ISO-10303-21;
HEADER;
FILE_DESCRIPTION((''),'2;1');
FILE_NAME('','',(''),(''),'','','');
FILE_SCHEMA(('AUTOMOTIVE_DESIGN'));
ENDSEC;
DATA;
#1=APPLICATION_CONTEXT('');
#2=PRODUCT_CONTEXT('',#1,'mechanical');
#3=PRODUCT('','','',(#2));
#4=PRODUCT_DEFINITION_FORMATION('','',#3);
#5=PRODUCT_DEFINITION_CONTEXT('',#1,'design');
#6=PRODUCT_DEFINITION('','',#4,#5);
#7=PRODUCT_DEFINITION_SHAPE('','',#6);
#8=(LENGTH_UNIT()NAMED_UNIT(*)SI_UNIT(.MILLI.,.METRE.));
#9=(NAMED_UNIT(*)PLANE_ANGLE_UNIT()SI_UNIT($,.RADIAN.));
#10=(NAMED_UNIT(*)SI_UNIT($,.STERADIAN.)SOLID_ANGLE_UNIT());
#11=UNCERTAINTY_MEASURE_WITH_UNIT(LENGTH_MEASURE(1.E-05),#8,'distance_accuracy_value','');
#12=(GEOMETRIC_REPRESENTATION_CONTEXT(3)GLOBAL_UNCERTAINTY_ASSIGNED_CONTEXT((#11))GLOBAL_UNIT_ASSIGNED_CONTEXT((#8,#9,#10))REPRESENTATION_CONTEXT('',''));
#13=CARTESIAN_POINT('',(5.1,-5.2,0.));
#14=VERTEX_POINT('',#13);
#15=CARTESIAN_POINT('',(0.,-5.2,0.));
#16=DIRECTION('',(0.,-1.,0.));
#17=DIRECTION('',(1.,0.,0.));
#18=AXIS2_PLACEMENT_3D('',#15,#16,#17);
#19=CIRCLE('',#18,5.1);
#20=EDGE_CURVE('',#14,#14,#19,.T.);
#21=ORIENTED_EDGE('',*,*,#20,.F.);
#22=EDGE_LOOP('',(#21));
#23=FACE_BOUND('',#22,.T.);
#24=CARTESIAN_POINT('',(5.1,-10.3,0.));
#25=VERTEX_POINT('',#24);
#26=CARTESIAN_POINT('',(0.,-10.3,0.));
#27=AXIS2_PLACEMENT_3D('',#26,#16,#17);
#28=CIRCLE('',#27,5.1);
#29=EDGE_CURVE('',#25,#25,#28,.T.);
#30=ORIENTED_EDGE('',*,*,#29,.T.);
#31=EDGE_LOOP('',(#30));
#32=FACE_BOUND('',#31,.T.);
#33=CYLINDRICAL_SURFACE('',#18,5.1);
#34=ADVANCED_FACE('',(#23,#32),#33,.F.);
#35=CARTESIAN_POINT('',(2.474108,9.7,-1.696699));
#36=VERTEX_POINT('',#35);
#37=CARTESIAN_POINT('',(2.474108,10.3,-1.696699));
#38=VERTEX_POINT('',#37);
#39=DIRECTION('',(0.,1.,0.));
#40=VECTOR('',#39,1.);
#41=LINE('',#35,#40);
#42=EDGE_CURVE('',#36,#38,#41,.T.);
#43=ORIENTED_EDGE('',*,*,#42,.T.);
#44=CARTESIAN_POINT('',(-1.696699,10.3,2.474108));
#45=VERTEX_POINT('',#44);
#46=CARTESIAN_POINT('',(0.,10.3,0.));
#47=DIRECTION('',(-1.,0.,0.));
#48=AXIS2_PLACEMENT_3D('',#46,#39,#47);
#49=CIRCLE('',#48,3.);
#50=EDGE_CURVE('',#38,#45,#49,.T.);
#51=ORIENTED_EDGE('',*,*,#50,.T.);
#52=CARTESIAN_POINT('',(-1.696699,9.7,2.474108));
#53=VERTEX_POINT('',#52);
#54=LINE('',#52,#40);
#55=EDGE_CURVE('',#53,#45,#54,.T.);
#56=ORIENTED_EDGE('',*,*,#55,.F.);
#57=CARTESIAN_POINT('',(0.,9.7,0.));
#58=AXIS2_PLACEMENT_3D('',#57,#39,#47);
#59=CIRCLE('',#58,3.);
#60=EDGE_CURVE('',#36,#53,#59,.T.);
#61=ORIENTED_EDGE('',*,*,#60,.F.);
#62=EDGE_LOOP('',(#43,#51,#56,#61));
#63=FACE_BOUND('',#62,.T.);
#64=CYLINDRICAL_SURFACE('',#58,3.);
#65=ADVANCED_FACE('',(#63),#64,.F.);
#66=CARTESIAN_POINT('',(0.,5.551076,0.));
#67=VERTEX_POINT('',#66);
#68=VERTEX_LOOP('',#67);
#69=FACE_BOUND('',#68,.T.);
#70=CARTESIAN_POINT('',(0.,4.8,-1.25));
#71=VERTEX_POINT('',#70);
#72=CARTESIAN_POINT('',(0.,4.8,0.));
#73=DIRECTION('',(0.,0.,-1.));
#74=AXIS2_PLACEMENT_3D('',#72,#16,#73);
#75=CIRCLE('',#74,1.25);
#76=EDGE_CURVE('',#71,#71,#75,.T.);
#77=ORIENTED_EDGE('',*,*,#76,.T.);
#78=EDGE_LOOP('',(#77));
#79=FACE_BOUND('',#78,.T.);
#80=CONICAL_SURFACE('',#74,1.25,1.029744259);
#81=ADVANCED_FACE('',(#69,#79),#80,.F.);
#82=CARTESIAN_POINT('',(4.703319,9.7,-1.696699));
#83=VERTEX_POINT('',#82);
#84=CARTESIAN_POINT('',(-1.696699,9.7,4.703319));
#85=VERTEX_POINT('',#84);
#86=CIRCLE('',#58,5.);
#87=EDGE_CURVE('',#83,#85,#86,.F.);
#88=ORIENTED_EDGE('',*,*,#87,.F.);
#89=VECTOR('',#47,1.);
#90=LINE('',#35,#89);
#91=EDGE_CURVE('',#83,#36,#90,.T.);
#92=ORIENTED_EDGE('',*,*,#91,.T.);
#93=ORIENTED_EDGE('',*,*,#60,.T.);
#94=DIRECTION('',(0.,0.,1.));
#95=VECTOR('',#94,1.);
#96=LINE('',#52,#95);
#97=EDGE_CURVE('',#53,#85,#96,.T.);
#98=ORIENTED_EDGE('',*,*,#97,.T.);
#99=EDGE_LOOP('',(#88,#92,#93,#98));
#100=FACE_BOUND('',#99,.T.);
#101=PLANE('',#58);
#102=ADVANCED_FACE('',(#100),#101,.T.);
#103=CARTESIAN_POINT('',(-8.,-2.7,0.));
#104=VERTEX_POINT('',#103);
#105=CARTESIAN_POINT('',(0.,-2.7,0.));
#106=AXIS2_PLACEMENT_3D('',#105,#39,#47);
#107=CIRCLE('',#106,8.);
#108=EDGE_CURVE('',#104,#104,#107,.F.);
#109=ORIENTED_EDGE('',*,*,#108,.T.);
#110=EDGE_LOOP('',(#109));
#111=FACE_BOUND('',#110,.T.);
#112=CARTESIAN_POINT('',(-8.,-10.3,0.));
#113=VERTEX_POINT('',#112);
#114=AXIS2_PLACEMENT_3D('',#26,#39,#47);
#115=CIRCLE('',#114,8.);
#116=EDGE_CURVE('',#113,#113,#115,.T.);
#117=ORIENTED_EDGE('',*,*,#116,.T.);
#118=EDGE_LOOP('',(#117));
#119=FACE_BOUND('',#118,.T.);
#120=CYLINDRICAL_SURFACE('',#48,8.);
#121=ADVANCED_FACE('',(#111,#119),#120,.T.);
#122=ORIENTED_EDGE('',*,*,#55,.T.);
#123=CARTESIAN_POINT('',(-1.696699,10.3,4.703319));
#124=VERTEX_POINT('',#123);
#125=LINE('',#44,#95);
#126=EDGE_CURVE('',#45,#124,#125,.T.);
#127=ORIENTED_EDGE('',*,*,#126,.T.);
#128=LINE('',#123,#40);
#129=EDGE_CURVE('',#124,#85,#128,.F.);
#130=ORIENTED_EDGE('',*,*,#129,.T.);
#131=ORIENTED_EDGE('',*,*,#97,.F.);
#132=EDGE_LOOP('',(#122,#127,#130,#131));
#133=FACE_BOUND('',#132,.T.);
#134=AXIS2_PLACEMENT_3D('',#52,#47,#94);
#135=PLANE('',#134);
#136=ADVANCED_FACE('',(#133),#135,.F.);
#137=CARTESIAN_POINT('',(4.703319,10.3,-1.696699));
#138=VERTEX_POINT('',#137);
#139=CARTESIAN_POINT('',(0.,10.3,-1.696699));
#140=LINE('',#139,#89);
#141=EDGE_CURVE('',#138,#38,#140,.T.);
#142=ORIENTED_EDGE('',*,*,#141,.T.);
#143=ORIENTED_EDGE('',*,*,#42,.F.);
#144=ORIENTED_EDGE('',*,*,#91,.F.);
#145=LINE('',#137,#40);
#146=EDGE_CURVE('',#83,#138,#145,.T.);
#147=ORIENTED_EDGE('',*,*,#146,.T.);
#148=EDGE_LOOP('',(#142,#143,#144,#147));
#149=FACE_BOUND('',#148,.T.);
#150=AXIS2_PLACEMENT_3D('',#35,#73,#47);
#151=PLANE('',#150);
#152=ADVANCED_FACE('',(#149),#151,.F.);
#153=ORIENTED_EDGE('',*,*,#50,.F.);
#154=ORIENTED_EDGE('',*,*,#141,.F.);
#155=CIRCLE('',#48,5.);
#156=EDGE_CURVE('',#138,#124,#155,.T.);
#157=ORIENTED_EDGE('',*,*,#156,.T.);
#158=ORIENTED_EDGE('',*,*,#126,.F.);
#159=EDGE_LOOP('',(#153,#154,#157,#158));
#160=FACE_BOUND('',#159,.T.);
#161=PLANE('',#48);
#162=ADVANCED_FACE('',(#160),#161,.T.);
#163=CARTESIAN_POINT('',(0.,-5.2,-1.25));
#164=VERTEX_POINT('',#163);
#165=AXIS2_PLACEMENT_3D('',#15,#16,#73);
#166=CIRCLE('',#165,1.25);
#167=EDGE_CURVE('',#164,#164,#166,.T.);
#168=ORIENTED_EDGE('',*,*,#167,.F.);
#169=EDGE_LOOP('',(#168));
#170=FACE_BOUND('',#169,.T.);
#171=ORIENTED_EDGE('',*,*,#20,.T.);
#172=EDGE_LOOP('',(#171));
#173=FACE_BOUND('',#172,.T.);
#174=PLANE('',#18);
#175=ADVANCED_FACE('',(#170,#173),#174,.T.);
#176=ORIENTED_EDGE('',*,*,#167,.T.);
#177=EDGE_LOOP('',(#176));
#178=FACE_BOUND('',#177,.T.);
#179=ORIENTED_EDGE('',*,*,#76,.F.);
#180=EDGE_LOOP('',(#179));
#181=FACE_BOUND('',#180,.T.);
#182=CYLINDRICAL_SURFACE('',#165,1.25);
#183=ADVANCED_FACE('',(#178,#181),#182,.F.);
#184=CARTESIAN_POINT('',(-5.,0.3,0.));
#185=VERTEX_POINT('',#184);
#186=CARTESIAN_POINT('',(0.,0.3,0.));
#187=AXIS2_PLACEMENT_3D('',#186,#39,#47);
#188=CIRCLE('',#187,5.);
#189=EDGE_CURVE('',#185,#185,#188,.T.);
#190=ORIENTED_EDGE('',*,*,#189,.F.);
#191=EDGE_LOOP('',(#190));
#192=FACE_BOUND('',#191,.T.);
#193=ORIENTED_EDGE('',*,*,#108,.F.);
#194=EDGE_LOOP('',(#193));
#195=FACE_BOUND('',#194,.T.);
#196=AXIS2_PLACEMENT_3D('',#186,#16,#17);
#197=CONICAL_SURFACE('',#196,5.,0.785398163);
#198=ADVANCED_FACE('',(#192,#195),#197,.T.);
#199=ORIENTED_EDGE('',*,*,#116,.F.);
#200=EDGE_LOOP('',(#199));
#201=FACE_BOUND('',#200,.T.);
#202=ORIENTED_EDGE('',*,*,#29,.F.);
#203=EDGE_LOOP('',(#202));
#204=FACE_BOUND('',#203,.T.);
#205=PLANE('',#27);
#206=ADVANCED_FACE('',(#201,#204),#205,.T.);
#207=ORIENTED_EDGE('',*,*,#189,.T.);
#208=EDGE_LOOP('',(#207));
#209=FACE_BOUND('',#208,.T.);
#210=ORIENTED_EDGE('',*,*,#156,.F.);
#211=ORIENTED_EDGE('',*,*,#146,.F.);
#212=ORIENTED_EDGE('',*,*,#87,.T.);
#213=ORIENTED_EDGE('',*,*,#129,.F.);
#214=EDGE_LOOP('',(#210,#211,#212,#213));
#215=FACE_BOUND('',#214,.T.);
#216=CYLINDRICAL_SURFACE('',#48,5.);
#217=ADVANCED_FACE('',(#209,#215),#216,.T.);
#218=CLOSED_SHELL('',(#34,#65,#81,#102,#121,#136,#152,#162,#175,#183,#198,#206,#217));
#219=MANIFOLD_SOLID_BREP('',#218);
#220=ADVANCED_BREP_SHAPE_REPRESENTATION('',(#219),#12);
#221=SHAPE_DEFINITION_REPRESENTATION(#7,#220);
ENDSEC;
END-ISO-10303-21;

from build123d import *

# Parameters (mm, degrees)
CUT_EXTRUDE_871_DEPTH  = 0.6
CHAMFER_1_SIZE         = 3
SKETCH_5_R             = 5.1
CUT_EXTRUDE_1040_DEPTH = 5.1
HOLE_WIZARD_M3_D       = 2.5
HOLE_WIZARD_M3_DEPTH   = 10
HOLE_WIZARD_M3_TIP     = 0.751075774


with BuildPart() as part:
    # Эскиз1 → Revolve 522 (revolve)
    with BuildSketch(Plane.XY):
        Polygon((0, 10.3), (-5, 10.3), (-5, 0.3), (-8, 0.3), (-8, -10.3), (0, -10.3), align=None)
    revolve(axis=Axis((0, 10.3, 0), (0, -1, 0)))

    # Эскиз4 → Cut-Extrude 871 (cut)
    with BuildSketch(Plane(origin=(0, 10.3, 0), x_dir=(1, 0, 0), z_dir=(0, 1, 0))):
        with BuildLine():
            Line((2.474108329, 1.696699141), (5.303300859, 1.696699141))
            Line((5.303300859, 1.696699141), (5.303300859, -5.303300859))
            Line((5.303300859, -5.303300859), (-1.696699141, -5.303300859))
            Line((-1.696699141, -5.303300859), (-1.696699141, -2.474108329))
            ThreePointArc((-1.696699141, -2.474108329), (-2.121320344, 2.121320344), (2.474108329, 1.696699141))
        make_face()
    extrude(amount=-CUT_EXTRUDE_871_DEPTH, mode=Mode.SUBTRACT)

    # Фаска1
    chamfer_1_edges = [part.edges().sort_by_distance(p)[0] for p in [
        (8, 0.3, 0),
    ]]
    chamfer(chamfer_1_edges, length=CHAMFER_1_SIZE - 0.0001)  # a hair under: the kernel refuses the full size

    # Эскиз5 → Cut-Extrude 1040 (cut)
    with BuildSketch(Plane.XZ.offset(10.3)):
        Circle(SKETCH_5_R)
    extrude(amount=-CUT_EXTRUDE_1040_DEPTH, mode=Mode.SUBTRACT)

    # Крепление магнита M3
    with Locations(Plane(origin=(0, -5.2, 0), x_dir=(-1, 0, 0), z_dir=(0, -1, 0))):
        with Locations((0, 0)):
            Hole(HOLE_WIZARD_M3_D / 2, depth=HOLE_WIZARD_M3_DEPTH)
            with Locations((0, 0, -(HOLE_WIZARD_M3_DEPTH + HOLE_WIZARD_M3_TIP / 2))):  # 118° drill point
                Cone(0, HOLE_WIZARD_M3_D / 2, HOLE_WIZARD_M3_TIP, mode=Mode.SUBTRACT)


solid = part.part
